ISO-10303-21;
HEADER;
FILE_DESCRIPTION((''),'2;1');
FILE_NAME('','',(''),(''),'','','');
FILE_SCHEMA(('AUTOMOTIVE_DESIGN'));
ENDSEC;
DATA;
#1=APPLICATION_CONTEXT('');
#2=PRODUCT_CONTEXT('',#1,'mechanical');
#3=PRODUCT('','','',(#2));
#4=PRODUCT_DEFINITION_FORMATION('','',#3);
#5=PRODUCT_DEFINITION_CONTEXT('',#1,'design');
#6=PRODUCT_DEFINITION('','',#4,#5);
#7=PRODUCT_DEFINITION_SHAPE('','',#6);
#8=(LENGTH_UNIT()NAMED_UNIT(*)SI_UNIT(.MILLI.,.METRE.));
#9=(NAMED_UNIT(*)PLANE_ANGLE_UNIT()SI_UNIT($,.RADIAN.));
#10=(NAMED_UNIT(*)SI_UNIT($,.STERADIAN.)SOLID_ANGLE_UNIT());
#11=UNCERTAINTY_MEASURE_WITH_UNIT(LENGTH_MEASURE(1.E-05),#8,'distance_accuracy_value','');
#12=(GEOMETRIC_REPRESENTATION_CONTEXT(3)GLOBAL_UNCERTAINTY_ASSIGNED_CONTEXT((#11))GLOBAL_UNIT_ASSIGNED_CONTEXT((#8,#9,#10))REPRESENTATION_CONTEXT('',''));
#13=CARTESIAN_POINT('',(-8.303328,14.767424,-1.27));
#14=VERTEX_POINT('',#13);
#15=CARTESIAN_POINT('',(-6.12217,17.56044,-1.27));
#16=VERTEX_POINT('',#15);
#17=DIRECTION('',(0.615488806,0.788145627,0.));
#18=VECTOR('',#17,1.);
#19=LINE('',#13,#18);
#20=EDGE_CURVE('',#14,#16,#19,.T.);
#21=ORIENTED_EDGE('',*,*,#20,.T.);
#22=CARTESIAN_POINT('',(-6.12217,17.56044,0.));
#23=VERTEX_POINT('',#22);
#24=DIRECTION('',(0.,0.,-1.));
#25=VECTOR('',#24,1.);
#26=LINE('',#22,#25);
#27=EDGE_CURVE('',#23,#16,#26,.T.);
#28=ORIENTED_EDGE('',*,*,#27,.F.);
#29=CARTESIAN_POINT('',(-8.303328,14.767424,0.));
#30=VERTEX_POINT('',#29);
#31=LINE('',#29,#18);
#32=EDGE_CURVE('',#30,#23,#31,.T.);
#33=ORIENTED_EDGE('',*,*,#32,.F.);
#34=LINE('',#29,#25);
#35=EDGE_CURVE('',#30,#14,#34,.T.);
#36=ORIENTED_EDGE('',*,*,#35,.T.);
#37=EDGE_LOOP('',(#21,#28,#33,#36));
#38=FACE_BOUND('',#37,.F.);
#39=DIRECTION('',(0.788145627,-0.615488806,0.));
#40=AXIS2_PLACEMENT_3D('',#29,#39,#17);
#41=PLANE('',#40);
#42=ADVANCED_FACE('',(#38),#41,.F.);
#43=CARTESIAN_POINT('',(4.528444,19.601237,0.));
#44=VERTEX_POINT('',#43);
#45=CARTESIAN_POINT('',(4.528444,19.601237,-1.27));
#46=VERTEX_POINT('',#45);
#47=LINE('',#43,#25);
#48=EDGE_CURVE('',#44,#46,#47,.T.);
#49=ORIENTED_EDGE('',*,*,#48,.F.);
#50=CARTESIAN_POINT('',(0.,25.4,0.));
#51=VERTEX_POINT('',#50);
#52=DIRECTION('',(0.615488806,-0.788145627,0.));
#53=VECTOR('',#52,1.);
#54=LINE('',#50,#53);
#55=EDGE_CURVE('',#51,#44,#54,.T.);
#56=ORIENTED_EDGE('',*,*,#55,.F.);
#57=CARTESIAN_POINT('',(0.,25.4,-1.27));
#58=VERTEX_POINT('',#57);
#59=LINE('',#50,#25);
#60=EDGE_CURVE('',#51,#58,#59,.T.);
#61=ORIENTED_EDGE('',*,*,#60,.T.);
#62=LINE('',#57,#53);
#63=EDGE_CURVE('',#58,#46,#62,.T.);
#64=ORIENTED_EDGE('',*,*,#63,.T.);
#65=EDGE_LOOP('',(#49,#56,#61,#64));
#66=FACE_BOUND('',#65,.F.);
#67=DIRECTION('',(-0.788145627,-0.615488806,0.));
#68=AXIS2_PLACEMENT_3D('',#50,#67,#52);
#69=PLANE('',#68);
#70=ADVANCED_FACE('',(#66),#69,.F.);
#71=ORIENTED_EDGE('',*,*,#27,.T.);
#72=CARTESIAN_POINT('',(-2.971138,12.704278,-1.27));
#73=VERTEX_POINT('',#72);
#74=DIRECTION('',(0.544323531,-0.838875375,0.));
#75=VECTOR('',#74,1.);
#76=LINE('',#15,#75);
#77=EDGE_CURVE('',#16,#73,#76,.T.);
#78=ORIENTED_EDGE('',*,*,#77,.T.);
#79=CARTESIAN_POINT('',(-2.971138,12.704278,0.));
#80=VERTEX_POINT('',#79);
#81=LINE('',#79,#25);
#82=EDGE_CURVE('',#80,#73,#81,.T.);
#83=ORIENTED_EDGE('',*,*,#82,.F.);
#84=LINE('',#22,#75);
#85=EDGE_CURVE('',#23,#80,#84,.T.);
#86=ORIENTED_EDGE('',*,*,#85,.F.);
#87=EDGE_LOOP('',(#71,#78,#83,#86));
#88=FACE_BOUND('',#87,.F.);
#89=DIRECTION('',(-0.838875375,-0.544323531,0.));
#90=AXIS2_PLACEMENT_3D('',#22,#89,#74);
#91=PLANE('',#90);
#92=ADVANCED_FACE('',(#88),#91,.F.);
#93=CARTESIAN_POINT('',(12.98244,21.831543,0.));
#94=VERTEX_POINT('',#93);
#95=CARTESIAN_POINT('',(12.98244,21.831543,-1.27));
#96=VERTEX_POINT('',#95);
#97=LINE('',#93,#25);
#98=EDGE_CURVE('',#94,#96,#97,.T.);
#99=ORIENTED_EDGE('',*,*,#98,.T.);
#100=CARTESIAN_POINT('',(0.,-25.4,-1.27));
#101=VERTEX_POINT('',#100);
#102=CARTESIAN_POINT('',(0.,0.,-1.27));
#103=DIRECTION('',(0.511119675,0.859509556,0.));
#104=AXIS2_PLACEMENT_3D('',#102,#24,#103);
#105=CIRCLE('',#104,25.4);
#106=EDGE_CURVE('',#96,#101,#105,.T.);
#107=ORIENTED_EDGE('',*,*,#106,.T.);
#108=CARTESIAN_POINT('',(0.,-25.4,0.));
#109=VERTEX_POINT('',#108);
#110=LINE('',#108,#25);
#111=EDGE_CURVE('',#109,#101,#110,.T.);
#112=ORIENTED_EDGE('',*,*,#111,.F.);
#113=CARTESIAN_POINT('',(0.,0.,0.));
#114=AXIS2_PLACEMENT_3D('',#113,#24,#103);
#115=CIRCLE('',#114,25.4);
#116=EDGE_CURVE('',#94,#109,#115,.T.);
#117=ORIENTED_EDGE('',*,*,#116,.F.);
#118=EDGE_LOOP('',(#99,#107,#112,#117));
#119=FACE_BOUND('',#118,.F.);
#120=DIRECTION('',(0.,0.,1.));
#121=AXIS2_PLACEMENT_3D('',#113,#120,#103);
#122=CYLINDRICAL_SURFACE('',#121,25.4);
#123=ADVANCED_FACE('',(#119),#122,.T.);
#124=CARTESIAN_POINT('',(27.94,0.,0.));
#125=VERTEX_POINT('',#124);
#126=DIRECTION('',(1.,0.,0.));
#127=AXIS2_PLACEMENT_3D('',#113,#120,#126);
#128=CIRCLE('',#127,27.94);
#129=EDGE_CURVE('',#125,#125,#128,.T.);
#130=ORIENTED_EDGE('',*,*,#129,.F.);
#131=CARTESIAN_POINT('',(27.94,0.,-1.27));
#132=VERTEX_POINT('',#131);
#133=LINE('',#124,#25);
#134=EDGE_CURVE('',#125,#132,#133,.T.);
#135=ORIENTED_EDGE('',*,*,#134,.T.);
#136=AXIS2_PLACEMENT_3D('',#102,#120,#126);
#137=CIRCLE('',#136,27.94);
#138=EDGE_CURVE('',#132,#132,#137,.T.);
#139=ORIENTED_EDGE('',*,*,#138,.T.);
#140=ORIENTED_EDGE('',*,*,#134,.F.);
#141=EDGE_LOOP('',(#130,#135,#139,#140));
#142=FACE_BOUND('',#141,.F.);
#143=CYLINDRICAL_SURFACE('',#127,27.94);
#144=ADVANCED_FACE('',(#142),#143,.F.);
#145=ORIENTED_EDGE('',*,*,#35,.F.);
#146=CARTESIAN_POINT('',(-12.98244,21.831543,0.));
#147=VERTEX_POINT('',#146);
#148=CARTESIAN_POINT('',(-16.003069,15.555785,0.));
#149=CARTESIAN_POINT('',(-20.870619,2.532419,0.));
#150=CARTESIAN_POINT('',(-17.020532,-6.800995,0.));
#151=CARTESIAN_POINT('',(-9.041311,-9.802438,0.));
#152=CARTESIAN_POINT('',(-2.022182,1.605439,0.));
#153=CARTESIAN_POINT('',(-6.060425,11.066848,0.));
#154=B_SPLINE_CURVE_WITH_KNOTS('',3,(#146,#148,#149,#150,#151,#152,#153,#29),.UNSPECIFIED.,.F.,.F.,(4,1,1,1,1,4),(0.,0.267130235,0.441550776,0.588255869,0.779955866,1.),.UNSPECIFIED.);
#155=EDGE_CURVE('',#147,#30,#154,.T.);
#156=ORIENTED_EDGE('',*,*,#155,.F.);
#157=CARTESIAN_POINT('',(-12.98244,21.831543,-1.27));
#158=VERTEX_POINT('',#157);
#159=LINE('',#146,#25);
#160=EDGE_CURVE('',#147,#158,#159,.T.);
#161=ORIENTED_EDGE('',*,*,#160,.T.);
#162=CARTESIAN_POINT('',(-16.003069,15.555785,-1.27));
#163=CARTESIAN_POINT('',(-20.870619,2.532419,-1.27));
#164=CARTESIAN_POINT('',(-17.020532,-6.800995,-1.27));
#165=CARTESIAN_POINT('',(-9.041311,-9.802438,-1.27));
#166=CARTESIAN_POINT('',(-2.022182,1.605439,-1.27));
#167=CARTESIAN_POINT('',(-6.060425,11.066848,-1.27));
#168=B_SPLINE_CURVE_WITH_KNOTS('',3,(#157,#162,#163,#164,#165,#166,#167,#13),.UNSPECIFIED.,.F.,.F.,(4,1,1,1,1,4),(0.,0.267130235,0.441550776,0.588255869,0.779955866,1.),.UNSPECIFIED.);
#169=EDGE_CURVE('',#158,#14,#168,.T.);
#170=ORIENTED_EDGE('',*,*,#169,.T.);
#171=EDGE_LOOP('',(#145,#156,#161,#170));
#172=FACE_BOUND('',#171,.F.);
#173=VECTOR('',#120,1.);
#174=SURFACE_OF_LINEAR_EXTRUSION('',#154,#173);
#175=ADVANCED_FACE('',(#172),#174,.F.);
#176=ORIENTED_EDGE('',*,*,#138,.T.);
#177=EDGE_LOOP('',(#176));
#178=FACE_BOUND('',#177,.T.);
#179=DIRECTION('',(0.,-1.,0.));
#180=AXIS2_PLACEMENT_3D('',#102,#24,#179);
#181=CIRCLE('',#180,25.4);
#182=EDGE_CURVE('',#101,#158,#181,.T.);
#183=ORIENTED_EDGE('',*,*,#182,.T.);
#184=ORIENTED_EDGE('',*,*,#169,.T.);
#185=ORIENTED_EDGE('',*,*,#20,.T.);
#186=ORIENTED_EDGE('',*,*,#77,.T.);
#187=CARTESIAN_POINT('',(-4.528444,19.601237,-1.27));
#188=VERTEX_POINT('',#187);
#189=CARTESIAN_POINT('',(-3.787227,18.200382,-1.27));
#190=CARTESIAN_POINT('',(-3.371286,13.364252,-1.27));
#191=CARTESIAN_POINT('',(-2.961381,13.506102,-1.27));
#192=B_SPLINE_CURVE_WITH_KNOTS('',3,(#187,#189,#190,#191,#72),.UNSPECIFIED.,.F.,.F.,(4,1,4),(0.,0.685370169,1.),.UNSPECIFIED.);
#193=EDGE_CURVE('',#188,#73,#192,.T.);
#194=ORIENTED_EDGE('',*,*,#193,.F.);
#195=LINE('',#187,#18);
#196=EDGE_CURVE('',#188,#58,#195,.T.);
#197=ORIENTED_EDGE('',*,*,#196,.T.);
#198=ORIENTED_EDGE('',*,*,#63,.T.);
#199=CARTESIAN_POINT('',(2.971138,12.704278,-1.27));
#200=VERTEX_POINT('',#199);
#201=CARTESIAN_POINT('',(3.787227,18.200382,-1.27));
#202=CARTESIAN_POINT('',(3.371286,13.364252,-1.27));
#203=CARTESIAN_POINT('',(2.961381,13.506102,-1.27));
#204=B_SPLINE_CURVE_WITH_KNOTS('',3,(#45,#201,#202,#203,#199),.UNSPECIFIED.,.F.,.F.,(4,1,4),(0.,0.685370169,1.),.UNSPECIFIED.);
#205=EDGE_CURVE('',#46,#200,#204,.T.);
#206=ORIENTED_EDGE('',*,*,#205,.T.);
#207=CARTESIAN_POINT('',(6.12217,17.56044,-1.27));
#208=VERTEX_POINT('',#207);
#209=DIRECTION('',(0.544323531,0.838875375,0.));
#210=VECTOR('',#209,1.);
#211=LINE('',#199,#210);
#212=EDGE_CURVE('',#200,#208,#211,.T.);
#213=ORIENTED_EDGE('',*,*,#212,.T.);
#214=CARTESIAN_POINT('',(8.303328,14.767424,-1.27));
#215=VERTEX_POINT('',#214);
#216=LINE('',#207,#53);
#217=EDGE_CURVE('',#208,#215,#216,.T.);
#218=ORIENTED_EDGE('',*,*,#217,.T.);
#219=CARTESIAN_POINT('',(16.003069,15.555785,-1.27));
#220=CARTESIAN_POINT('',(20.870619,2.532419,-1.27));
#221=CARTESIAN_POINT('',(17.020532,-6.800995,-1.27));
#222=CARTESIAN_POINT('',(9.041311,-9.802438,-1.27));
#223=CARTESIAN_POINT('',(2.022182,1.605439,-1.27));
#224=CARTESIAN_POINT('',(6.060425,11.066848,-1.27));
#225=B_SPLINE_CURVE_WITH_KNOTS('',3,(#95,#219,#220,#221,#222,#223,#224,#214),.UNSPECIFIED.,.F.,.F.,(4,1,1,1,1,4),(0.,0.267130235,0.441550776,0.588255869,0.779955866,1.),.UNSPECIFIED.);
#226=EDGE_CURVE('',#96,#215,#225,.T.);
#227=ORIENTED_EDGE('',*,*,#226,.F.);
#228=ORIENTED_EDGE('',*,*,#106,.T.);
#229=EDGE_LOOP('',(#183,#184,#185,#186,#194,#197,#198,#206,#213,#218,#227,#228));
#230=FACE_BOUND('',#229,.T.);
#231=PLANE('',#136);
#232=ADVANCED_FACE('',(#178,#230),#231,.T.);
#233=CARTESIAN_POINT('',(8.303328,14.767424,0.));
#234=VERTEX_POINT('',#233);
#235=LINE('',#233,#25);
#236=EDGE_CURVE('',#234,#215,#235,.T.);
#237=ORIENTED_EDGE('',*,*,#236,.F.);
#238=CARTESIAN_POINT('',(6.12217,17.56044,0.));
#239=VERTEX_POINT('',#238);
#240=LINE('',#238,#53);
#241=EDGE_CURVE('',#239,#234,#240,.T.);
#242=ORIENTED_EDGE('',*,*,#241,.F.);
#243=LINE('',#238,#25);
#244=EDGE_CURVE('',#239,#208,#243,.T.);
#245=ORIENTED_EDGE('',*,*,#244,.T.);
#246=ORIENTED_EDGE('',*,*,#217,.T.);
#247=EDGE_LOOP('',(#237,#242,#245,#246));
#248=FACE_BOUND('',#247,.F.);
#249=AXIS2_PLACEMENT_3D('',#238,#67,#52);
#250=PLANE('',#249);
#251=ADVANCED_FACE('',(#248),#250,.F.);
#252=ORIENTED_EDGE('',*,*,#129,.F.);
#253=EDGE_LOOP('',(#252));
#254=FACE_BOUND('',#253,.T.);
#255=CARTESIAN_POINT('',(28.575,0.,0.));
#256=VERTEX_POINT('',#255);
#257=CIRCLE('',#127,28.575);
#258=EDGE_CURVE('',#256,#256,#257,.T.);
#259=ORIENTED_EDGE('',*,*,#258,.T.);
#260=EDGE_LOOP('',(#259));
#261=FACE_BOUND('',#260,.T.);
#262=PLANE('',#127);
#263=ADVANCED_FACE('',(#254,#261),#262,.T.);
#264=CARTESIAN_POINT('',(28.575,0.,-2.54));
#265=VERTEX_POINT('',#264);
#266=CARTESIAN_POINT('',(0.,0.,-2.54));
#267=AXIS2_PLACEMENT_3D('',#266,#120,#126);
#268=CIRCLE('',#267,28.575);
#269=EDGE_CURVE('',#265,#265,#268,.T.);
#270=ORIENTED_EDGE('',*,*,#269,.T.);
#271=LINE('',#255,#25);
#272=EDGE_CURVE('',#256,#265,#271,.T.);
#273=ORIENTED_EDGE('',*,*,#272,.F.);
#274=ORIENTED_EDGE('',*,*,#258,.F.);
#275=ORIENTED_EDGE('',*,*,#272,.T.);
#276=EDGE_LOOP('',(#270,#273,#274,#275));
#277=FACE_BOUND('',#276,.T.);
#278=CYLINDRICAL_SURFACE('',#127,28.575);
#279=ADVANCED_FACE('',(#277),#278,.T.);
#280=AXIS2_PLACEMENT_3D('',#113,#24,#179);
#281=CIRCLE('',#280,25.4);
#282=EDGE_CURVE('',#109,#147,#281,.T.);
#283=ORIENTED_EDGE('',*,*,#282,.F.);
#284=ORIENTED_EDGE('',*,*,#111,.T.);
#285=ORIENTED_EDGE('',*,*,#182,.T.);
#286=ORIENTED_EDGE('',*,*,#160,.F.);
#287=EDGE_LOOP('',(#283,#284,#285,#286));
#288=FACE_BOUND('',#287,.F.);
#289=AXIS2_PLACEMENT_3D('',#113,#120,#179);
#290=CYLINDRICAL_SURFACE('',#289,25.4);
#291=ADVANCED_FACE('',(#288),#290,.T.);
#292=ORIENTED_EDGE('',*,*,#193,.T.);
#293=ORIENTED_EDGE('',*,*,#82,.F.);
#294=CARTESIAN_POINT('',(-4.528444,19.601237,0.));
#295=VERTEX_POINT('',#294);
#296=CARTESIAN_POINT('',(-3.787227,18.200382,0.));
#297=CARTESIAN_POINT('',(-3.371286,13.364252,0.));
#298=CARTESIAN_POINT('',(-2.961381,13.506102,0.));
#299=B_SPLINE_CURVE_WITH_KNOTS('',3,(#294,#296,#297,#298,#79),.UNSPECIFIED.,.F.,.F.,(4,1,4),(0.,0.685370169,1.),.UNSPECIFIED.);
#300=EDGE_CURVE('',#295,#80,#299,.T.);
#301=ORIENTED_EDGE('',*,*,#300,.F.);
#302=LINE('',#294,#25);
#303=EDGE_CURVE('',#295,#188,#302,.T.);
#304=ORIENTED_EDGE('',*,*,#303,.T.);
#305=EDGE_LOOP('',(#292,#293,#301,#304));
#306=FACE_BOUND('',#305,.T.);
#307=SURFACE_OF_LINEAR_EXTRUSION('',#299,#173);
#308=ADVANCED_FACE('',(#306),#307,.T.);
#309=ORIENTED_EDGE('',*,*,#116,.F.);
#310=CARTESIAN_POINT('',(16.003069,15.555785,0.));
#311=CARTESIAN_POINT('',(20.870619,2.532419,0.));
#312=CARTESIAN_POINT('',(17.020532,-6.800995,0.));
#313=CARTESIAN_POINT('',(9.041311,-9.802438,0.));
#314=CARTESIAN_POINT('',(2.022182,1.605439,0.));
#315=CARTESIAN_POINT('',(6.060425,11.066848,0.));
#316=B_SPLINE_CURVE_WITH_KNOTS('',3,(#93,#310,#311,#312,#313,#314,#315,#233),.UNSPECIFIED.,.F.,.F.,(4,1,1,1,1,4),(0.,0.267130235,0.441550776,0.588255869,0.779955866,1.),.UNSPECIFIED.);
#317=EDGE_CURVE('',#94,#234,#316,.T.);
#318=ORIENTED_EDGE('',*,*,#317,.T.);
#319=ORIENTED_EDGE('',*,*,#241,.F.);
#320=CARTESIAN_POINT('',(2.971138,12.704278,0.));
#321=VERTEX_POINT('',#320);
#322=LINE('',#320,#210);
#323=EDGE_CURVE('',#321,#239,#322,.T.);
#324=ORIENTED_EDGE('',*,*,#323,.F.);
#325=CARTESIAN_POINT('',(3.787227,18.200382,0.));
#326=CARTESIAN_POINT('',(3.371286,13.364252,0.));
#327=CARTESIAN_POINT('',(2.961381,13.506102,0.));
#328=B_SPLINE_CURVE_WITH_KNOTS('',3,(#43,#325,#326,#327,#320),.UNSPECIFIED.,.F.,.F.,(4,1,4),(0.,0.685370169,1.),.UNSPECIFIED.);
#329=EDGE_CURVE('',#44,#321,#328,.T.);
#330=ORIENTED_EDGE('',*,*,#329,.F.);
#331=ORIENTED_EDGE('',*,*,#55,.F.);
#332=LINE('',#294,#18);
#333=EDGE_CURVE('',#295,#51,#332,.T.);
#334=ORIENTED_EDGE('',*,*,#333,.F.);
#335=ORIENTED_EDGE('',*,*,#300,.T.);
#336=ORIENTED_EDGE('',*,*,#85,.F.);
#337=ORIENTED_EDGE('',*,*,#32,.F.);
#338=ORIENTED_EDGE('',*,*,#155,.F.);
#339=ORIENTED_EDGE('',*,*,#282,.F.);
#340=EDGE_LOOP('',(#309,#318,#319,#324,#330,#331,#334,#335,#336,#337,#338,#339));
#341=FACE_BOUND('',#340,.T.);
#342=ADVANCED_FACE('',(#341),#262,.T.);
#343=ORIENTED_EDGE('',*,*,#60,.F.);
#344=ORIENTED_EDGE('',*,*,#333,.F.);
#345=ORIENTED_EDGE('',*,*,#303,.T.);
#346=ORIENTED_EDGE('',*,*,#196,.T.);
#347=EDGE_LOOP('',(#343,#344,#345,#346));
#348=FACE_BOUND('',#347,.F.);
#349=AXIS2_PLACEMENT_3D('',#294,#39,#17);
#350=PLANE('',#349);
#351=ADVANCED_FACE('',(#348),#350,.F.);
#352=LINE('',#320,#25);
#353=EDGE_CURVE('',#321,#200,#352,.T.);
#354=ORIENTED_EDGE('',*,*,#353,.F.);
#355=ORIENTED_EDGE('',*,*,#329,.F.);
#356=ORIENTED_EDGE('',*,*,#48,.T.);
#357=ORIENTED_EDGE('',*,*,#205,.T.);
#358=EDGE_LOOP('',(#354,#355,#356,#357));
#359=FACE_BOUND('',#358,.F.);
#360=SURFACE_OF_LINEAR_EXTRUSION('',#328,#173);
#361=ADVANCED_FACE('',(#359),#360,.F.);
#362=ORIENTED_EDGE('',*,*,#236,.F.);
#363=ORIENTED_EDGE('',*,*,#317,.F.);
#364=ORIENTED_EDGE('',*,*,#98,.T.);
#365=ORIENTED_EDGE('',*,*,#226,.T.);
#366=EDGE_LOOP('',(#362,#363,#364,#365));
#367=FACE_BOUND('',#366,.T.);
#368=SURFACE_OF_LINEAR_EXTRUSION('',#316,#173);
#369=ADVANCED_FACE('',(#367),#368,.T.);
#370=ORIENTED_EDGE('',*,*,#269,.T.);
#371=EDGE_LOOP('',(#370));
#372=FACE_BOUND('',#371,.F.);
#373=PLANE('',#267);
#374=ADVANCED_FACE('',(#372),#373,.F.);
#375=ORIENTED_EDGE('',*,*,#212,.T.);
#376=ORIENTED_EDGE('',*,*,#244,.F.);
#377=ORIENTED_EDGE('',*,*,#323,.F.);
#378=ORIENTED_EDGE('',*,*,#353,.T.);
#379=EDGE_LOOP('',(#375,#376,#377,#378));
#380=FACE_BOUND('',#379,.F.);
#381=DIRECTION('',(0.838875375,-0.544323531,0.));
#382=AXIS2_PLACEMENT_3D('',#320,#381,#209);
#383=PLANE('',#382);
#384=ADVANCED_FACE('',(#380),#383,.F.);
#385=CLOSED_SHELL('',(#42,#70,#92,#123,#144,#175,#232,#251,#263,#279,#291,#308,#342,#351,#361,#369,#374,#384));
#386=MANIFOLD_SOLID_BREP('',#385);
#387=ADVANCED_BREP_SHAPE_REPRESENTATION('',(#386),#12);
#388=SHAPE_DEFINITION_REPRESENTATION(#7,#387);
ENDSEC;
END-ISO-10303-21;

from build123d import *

# Parameters (mm, degrees)
F1_R     = 28.575
F2_DEPTH = 2.54
F0_R     = 27.94
F3_DEPTH = 1.27


with BuildPart() as f2:
    # F1 (on Top) → F2 (new body)
    with BuildSketch(Plane.XY):
        Circle(F1_R)
    extrude(amount=-F2_DEPTH)

    # F0 (on Top) → F3 (cut)
    with BuildSketch(Plane.XY):
        Circle(F0_R)
        with BuildLine():
            ThreePointArc((-12.9824397575, 21.8315427293), (-6.7319690535, 24.491643323), (0, 25.4))
            ThreePointArc((0, 25.4), (6.7319690535, 24.491643323), (12.9824397575, 21.8315427293))
            ThreePointArc((12.9824397575, 21.8315427293), (24.491643323, -6.7319690535), (0, -25.4))
            ThreePointArc((0, -25.4), (-24.491643323, -6.7319690535), (-12.9824397575, 21.8315427293))
        make_face(mode=Mode.SUBTRACT)
        with BuildLine():
            Line((-4.5284444434, 19.6012370521), (0, 25.4))
            ThreePointArc((0, 25.4), (-6.7319690535, 24.491643323), (-12.9824397575, 21.8315427293))
            add(Edge.make_bspline(
                [(-12.9824397575, 21.8315427293), (-16.0030685137, 15.555784787), (-20.8706185969, 2.5324190308), (-17.0205320702, -6.8009951083), (-9.0413114467, -9.8024376533), (-2.0221816541, 1.6054390369), (-6.0604248598, 11.0668484831), (-8.3033278917, 14.767423908)],
                knots=[0, 0, 0, 0, 0.267130235, 0.4415507763, 0.5882558694, 0.7799558658, 1, 1, 1, 1], degree=3))
            Line((-8.3033278917, 14.767423908), (-6.1221701965, 17.5604396079))
            Line((-6.1221701965, 17.5604396079), (-4.5284444434, 19.6012370521))
        make_face()
        with BuildLine():
            ThreePointArc((12.9824397575, 21.8315427293), (6.7319690535, 24.491643323), (0, 25.4))
            Line((0, 25.4), (4.5284444434, 19.6012370521))
            Line((4.5284444434, 19.6012370521), (6.1221701965, 17.5604396079))
            Line((6.1221701965, 17.5604396079), (8.3033278917, 14.767423908))
            add(Edge.make_bspline(
                [(12.9824397575, 21.8315427293), (16.0030685137, 15.555784787), (20.8706185969, 2.5324190308), (17.0205320702, -6.8009951083), (9.0413114467, -9.8024376533), (2.0221816541, 1.6054390369), (6.0604248598, 11.0668484831), (8.3033278917, 14.767423908)],
                knots=[0, 0, 0, 0, 0.267130235, 0.4415507763, 0.5882558694, 0.7799558658, 1, 1, 1, 1], degree=3))
        make_face()
        with BuildLine():
            Line((6.1221701965, 17.5604396079), (4.5284444434, 19.6012370521))
            add(Edge.make_bspline(
                [(4.5284444434, 19.6012370521), (3.7872271779, 18.2003817365), (3.371286388, 13.3642519376), (2.9613813264, 13.5061021755), (2.9711382824, 12.7042779153)],
                knots=[0, 0, 0, 0, 0.6853701695, 1, 1, 1, 1], degree=3))
            Line((2.9711382824, 12.7042779153), (6.1221701965, 17.5604396079))
        make_face()
        with BuildLine():
            add(Edge.make_bspline(
                [(-4.5284444434, 19.6012370521), (-3.7872271779, 18.2003817365), (-3.371286388, 13.3642519376), (-2.9613813264, 13.5061021755), (-2.9711382824, 12.7042779153)],
                knots=[0, 0, 0, 0, 0.6853701695, 1, 1, 1, 1], degree=3))
            Line((-4.5284444434, 19.6012370521), (-6.1221701965, 17.5604396079))
            Line((-6.1221701965, 17.5604396079), (-2.9711382824, 12.7042779153))
        make_face()
    extrude(amount=-F3_DEPTH, mode=Mode.SUBTRACT)


solid = f2.part
